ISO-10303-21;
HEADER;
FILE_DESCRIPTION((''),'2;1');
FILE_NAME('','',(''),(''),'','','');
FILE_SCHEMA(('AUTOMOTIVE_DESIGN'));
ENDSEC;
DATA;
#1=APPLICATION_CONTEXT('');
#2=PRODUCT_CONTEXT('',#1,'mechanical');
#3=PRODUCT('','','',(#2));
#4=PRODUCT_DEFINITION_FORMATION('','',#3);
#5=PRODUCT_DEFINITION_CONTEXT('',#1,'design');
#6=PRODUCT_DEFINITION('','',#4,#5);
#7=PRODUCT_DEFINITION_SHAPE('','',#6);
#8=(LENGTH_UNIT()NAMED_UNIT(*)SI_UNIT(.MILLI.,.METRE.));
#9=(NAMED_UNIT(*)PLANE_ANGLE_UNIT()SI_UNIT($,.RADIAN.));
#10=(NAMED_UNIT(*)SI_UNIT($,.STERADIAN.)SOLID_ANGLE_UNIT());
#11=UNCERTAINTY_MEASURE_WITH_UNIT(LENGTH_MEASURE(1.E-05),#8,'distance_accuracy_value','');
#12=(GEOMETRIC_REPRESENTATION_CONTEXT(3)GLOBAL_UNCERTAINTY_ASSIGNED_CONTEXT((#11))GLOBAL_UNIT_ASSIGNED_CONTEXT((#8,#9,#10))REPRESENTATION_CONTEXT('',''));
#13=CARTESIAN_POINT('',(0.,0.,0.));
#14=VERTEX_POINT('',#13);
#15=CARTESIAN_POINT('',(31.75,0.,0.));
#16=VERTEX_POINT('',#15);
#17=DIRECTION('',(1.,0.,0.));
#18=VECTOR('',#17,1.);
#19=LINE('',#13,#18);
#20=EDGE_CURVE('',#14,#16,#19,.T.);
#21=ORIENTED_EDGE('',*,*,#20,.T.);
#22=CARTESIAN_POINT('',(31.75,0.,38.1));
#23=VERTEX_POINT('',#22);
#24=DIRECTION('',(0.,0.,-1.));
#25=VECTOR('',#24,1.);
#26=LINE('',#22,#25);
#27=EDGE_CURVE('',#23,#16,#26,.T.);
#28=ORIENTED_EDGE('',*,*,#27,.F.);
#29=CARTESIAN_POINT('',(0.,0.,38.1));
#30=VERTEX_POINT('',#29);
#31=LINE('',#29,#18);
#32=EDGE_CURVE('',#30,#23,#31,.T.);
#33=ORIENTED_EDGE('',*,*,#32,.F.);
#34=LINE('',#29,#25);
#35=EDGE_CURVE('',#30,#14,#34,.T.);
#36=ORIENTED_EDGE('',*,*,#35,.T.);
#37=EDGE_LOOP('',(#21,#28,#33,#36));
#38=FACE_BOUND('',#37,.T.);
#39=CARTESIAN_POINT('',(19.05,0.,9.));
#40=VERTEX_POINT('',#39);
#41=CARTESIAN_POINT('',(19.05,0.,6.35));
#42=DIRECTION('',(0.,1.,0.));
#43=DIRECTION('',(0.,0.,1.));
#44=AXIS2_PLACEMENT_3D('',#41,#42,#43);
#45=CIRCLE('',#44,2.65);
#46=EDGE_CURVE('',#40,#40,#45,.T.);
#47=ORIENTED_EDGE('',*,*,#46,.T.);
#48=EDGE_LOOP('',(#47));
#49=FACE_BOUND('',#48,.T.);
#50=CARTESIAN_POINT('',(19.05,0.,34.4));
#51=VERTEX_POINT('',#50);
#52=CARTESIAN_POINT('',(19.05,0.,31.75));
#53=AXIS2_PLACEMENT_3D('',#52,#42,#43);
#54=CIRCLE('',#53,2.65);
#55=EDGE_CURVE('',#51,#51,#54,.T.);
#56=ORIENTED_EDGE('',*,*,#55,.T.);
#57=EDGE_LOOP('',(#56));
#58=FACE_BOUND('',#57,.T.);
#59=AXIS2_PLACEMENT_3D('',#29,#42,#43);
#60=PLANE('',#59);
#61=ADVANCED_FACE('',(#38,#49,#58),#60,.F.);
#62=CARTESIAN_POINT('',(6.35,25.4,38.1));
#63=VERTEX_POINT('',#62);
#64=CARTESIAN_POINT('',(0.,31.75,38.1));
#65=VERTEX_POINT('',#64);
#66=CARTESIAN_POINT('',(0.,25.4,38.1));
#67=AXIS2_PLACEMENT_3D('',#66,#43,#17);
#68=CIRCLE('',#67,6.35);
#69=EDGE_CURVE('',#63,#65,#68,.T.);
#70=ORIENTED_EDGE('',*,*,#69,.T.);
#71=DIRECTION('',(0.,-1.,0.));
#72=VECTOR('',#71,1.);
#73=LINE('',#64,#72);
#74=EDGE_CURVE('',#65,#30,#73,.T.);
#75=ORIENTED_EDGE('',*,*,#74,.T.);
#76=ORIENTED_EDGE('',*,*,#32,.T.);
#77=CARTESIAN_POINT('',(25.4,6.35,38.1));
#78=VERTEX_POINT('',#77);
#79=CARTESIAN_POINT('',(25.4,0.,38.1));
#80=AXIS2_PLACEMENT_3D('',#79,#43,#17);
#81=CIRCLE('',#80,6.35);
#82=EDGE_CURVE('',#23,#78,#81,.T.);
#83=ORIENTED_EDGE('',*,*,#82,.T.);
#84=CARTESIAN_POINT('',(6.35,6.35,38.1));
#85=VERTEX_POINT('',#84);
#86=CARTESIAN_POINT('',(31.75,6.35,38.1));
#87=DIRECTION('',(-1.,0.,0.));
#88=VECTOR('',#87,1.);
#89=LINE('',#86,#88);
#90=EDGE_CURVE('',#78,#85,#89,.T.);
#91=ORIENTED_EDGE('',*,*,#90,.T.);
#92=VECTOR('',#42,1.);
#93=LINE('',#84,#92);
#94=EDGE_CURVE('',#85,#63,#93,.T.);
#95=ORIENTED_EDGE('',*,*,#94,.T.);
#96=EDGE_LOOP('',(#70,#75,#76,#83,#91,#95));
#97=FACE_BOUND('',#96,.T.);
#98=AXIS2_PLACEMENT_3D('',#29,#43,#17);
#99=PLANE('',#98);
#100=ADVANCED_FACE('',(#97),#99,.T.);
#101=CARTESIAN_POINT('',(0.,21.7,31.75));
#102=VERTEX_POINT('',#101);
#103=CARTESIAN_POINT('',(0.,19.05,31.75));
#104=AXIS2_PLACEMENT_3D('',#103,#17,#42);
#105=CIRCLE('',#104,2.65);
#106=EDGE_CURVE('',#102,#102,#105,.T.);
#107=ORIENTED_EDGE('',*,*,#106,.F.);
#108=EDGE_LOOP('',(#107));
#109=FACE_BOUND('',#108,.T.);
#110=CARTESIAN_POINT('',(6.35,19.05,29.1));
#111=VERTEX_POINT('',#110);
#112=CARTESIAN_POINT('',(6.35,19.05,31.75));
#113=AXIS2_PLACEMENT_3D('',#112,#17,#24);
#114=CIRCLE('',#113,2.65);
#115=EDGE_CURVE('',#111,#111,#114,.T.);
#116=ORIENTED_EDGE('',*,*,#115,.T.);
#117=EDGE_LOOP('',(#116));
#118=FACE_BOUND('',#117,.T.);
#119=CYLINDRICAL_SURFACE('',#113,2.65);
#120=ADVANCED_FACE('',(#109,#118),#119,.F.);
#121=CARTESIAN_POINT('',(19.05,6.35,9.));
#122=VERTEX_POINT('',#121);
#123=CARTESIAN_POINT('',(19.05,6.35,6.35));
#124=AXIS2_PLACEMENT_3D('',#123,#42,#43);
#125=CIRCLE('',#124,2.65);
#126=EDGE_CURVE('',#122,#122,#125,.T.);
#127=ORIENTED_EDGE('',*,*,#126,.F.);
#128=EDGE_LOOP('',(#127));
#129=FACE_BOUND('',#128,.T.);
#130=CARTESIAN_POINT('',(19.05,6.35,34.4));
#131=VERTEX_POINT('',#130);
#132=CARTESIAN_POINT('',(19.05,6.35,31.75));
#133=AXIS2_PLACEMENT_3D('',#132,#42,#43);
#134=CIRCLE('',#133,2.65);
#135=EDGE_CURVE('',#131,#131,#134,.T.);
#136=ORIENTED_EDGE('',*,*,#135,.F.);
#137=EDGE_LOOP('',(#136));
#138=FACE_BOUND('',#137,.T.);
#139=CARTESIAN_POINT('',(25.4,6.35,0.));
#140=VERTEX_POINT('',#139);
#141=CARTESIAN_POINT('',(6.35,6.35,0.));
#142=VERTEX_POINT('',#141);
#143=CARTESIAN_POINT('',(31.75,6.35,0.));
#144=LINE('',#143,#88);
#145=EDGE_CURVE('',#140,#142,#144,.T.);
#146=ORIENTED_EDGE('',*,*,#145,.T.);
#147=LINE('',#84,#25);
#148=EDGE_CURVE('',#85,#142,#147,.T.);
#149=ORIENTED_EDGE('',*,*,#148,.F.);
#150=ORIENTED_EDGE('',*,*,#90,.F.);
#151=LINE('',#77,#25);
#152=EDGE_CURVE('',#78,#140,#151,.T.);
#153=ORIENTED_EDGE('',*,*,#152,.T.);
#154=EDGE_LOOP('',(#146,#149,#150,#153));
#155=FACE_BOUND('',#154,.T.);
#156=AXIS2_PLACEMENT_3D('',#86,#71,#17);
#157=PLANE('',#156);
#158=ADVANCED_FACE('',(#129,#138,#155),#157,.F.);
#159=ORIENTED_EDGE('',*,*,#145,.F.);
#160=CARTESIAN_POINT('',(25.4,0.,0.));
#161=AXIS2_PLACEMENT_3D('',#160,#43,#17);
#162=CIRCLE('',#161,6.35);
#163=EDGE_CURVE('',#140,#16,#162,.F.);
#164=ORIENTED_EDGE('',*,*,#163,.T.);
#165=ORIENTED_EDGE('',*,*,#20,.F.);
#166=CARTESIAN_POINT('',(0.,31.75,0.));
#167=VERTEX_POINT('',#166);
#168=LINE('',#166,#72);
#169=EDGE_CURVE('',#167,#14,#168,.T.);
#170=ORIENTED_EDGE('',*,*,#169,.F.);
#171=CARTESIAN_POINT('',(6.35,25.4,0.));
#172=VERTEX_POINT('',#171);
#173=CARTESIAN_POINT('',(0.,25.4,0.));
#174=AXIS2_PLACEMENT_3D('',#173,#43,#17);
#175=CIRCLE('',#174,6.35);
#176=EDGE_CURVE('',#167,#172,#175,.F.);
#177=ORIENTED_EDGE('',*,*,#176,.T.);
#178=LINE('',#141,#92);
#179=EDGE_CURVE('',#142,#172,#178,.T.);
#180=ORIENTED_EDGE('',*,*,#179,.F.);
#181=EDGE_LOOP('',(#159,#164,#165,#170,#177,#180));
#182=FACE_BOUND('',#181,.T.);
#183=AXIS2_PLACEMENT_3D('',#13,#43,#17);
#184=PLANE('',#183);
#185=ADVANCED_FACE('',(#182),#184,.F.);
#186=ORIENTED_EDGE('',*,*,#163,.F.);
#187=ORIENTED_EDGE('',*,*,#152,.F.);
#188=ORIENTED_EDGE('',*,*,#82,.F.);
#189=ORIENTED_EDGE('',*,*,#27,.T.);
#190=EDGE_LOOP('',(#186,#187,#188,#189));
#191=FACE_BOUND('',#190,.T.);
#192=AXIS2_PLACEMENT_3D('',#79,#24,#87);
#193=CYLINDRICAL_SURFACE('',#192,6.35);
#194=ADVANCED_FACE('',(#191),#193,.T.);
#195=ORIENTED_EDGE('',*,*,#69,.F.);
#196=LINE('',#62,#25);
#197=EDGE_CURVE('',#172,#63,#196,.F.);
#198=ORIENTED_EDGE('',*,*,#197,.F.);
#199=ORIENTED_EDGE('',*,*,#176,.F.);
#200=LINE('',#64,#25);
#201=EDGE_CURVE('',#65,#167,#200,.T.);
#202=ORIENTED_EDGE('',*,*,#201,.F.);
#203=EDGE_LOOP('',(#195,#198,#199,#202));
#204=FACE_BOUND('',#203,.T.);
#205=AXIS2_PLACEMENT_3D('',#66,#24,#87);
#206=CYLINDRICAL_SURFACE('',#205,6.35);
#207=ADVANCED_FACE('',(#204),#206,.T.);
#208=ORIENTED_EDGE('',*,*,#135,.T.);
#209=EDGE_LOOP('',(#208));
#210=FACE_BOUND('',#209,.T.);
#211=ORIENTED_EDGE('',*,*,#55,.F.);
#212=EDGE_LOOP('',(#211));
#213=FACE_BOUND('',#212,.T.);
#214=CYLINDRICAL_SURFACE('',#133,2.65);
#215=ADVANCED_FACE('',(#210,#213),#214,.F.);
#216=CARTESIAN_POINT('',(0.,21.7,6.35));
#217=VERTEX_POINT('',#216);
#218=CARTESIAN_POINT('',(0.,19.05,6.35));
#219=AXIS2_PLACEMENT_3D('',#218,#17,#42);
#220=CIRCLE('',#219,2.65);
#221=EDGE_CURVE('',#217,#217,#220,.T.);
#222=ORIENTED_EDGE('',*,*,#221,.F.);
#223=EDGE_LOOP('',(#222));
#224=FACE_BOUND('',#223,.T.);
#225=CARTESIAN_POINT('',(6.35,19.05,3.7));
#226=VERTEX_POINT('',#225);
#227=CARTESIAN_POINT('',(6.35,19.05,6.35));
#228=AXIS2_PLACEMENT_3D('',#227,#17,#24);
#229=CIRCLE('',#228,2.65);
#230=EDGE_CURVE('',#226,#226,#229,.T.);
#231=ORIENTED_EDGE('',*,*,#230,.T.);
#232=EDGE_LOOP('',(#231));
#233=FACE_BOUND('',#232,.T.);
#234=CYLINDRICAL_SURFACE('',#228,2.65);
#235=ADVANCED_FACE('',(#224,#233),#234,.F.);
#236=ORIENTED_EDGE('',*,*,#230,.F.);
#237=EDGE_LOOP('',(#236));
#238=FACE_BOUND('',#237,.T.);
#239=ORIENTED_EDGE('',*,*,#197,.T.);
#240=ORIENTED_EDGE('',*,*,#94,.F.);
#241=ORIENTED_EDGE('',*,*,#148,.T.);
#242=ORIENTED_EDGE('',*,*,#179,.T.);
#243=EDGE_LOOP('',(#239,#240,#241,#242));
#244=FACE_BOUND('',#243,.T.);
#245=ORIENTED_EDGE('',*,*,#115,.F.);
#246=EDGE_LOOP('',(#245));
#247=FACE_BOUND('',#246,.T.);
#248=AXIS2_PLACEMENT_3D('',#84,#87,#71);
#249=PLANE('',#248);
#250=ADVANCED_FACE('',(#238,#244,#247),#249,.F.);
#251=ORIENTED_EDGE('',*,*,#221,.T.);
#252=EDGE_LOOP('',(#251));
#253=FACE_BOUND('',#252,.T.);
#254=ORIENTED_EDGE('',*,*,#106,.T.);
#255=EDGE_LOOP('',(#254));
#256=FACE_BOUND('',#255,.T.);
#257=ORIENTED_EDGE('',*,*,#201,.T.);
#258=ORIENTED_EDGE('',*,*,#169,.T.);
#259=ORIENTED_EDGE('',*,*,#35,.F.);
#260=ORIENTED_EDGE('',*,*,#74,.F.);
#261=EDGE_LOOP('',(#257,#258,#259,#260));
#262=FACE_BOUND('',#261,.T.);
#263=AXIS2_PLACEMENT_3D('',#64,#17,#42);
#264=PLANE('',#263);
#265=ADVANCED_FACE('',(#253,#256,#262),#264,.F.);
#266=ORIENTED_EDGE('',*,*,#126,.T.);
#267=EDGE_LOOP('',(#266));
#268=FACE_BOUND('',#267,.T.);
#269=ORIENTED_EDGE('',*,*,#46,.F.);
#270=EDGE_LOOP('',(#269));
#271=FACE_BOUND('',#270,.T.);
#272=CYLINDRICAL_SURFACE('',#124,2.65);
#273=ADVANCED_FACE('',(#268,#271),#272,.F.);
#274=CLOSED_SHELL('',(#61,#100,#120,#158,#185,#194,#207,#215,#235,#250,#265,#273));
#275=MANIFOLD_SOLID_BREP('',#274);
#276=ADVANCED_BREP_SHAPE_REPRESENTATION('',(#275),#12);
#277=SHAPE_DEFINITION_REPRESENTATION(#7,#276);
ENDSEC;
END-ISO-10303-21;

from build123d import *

# Parameters (mm, degrees)
BOSS_EXTRUDE1_DEPTH  = 38.1
FILLET1_R            = 6.35
M5_CLEARANCE_HOLE1_D = 5.3


with BuildPart() as part:
    # Sketch1 → Boss-Extrude1 (new body)
    with BuildSketch(Plane.XY):
        Polygon((0, 0), (31.75, 0), (31.75, 6.35), (6.35, 6.35), (6.35, 31.75), (0, 31.75), align=None)
    extrude(amount=BOSS_EXTRUDE1_DEPTH)

    # Fillet1
    fillet1_edges = [part.edges().sort_by_distance(p)[0] for p in [
        (31.75, 6.35, 19.05),
        (6.35, 31.75, 19.05),
    ]]
    fillet(fillet1_edges, radius=FILLET1_R - 0.0001)  # a hair under: the kernel refuses the full size

    # M5 Clearance Hole1 (through all)
    with Locations(Plane(origin=(6.35, 0, 0), x_dir=(0, 0, -1), z_dir=(1, 0, 0))):
        with Locations((-31.75, 19.05), (-6.35, 19.05)):
            m5_clearance_hole1 = Hole(M5_CLEARANCE_HOLE1_D / 2)

    # Mirror1: M5 Clearance Hole1 across plane
    add(m5_clearance_hole1.mirror(Plane(origin=(0, 0, 0), x_dir=(0, 0, 1), z_dir=(-0.7071067811865472, 0.7071067811865479, 0))), mode=Mode.SUBTRACT)


solid = part.part
